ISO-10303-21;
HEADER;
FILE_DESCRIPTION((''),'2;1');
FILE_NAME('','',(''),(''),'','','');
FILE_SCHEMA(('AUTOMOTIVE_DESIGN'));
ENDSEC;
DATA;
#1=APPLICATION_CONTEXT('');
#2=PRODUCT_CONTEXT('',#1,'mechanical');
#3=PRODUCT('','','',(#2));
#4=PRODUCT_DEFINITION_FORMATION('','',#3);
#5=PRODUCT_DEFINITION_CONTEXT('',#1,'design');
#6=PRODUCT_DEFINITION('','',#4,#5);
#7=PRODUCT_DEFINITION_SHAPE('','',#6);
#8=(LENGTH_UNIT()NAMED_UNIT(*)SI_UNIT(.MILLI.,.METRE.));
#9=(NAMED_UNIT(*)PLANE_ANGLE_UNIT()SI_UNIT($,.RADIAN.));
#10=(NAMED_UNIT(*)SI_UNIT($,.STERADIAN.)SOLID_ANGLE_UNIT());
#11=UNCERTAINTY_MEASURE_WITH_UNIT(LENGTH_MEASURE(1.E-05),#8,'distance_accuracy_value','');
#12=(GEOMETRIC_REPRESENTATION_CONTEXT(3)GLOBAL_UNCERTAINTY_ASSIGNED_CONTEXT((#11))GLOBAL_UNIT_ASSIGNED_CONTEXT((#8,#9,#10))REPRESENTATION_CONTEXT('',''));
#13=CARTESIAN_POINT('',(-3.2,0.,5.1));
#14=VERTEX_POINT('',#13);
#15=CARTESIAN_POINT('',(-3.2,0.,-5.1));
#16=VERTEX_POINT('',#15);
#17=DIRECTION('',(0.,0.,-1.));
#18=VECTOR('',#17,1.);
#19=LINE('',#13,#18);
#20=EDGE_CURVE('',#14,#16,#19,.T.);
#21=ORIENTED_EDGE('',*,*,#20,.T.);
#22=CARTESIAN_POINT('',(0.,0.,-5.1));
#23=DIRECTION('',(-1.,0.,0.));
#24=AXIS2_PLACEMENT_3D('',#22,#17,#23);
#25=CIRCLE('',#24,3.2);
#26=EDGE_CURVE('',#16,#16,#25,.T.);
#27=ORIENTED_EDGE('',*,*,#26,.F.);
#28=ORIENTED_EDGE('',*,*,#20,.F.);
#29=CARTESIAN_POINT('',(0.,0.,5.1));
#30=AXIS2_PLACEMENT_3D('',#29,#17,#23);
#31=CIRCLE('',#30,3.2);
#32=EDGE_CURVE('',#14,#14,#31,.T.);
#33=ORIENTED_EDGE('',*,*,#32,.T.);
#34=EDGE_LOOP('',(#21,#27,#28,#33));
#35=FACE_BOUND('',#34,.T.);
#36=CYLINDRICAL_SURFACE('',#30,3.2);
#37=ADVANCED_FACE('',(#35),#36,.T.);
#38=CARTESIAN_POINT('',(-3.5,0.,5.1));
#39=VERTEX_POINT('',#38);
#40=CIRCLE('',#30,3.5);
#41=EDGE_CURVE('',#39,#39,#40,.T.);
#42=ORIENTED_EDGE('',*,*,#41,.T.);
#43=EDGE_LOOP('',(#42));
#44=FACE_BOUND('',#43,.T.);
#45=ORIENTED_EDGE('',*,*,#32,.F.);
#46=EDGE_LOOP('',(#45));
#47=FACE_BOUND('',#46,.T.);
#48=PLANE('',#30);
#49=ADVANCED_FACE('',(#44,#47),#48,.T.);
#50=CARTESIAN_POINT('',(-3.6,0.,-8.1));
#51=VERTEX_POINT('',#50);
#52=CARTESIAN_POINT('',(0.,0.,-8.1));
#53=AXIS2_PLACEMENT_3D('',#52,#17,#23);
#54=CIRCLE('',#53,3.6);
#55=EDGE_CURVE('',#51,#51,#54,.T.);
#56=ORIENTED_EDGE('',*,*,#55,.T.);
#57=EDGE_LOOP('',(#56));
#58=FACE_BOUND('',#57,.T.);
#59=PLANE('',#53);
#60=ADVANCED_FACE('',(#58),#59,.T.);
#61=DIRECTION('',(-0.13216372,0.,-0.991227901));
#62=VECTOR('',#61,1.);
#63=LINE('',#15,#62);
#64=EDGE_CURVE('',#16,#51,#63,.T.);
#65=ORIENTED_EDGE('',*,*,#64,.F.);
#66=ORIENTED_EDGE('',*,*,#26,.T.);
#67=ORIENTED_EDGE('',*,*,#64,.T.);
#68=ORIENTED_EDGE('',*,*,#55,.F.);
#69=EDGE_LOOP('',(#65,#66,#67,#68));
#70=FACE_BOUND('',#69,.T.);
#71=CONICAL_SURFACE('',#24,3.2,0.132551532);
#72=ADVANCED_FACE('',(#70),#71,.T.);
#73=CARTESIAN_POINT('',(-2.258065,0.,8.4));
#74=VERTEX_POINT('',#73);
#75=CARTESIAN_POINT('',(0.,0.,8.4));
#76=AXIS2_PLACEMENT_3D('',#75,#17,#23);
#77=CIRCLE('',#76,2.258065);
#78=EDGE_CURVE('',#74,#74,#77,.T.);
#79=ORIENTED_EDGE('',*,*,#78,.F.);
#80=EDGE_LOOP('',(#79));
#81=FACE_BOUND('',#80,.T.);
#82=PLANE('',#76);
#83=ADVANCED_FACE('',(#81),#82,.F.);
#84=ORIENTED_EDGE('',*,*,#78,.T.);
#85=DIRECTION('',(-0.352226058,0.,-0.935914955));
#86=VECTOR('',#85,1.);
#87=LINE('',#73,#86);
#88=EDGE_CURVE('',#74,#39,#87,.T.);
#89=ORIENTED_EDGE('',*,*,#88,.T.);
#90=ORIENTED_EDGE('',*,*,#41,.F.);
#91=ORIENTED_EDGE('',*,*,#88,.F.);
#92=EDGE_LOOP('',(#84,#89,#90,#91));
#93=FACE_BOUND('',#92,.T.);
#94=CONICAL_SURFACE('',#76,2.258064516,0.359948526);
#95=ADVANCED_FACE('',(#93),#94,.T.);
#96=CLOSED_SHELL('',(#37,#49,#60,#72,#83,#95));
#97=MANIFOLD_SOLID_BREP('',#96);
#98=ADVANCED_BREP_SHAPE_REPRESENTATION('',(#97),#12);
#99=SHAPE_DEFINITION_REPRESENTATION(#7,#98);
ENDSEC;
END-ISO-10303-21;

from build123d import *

# Parameters (mm, degrees)
F0_W = 3.2
F0_H = 5.1


# Not quite as in the source:
# - a feature names something its author has since deleted; it is built from what else it names


with BuildPart() as f1:
    # F0 (on Front) → F1 (revolve)
    with BuildSketch(Plane.XZ):
        Polygon((-3.2, 5.1), (0, 5.1), (0, 8.4), (-2.2580645161, 8.4), (-3.5, 5.1), align=None)
        with Locations((-1.6, 2.55)):
            Rectangle(F0_W, F0_H)
        with Locations((-1.6, -2.55)):
            Rectangle(F0_W, F0_H)
        Polygon((0, -8.1), (0, -5.1), (-3.2, -5.1), (-3.6, -8.1), align=None)
    revolve(axis=Axis((0, 0, -2.55), (0, 0, -1)))


solid = f1.part
